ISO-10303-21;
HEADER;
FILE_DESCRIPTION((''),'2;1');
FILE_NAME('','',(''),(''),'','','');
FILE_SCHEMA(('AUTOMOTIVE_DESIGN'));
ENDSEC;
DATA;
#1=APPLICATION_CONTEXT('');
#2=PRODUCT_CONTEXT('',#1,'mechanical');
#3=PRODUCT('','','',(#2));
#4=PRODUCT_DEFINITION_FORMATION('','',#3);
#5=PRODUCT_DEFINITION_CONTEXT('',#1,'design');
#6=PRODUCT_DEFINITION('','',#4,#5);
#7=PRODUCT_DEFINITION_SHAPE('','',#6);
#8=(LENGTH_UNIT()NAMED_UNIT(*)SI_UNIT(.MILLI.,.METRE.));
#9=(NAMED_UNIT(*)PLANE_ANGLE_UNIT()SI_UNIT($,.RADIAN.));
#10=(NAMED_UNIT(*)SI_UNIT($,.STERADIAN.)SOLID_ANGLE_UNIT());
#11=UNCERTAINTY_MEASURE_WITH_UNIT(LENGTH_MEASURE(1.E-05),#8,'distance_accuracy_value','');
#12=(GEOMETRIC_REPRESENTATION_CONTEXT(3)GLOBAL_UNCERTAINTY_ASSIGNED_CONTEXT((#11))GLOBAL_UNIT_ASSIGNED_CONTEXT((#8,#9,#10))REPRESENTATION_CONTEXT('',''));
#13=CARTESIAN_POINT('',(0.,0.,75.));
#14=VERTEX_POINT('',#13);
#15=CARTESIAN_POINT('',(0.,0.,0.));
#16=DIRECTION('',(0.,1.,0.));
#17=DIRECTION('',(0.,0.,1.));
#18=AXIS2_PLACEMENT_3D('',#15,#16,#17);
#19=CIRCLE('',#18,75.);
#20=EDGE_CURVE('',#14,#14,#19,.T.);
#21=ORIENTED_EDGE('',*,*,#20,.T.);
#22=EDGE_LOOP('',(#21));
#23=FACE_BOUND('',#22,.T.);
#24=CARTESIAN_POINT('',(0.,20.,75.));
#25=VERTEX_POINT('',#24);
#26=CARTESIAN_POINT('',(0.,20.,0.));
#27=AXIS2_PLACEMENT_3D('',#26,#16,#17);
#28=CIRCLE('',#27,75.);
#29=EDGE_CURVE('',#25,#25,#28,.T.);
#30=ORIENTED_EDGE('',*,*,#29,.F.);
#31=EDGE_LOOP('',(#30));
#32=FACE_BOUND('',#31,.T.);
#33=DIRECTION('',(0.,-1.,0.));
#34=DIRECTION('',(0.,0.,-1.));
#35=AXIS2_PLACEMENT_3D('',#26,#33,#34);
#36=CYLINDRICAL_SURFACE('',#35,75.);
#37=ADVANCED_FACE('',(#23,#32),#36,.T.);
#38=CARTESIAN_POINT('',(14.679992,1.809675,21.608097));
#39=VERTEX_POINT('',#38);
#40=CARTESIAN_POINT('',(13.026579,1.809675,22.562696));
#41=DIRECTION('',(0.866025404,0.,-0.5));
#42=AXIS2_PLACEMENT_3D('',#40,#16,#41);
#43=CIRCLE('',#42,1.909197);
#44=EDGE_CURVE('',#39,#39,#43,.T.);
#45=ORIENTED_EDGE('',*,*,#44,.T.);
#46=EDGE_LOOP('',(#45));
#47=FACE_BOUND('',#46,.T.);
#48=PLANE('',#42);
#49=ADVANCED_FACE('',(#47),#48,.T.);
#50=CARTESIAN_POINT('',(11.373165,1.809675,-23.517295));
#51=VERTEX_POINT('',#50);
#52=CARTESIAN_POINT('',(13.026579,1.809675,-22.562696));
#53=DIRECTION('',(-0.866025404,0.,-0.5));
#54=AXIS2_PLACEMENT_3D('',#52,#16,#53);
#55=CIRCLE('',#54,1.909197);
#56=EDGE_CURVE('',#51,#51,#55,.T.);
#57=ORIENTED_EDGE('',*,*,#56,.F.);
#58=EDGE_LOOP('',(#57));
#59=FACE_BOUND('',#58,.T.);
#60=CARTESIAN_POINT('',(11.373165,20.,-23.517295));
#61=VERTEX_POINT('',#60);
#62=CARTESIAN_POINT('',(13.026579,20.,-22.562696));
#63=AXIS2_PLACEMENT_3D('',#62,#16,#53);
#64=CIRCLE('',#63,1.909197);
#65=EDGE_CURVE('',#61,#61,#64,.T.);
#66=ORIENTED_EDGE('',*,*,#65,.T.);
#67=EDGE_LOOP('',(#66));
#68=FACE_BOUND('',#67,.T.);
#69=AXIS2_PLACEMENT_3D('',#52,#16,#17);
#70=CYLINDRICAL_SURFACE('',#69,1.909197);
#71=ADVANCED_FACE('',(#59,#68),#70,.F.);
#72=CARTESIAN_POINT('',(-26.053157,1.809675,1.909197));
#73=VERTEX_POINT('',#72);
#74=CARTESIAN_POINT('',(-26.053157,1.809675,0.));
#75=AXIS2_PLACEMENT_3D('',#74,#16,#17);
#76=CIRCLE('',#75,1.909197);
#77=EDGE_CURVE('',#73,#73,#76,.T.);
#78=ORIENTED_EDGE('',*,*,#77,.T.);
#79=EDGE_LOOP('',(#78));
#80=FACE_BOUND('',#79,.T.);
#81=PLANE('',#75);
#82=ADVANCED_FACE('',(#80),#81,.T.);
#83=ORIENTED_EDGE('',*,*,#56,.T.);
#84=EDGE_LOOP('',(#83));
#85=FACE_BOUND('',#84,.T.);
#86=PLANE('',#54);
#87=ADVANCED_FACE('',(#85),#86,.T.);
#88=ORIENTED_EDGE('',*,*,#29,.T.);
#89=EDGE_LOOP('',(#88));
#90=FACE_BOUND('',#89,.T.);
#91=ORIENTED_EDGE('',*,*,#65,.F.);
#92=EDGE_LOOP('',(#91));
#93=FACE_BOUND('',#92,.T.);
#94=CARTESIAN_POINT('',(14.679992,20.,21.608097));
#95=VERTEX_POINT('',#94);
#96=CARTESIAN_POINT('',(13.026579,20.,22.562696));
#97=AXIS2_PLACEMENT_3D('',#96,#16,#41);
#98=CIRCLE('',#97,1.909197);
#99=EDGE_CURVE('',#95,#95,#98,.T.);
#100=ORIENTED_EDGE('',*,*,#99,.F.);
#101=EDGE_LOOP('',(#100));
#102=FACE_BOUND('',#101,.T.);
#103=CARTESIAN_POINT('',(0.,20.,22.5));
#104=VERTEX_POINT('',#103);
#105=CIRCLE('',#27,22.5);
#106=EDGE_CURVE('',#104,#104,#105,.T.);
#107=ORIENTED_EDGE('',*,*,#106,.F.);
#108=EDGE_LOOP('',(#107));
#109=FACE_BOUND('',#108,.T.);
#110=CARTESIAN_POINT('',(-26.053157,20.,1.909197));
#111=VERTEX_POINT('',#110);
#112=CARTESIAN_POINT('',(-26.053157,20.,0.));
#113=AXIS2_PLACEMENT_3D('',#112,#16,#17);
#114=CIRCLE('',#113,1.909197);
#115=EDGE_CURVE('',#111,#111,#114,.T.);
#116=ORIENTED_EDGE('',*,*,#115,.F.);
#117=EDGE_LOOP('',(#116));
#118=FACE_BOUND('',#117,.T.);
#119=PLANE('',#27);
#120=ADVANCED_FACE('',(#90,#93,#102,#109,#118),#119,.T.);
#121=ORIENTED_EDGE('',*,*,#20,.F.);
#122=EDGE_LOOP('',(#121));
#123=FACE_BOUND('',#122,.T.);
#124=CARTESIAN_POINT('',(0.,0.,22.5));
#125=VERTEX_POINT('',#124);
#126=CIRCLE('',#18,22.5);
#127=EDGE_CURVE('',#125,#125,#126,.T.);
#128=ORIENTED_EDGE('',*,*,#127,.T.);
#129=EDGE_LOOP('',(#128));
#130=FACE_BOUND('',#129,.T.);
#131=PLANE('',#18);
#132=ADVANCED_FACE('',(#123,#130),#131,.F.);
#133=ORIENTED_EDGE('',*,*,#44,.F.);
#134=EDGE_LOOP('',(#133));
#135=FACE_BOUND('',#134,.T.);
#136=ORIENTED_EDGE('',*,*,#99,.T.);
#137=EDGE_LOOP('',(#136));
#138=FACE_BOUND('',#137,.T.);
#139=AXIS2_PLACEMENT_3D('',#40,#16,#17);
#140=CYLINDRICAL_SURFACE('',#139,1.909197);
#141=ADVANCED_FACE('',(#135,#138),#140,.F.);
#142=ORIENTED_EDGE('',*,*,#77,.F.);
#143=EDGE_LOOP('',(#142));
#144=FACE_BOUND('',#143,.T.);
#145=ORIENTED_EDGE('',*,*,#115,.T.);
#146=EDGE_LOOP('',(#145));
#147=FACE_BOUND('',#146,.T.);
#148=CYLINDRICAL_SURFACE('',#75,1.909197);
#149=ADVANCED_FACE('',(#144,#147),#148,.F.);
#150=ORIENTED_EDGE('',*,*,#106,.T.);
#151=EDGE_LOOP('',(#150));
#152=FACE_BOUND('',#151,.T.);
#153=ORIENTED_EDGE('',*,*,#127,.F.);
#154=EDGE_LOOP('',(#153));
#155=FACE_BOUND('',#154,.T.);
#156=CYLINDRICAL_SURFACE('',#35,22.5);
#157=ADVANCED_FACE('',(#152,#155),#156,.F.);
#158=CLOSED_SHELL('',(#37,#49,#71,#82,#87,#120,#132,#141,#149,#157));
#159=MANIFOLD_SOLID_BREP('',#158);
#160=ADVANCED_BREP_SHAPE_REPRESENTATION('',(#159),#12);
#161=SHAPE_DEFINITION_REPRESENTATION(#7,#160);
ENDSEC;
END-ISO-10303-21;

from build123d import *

# Parameters (mm, degrees)
SKETCH1_R           = 75
BOSS_EXTRUDE1_DEPTH = 20
SKETCH2_R           = 22.5
CUT_EXTRUDE1_DEPTH  = 108.935165725
SKETCH3_R           = 1.909197161
CUT_EXTRUDE2_DEPTH  = 18.190324685
CIRPATTERN1_COUNT   = 3


with BuildPart() as part:
    # Sketch1 → Boss-Extrude1 (new body)
    with BuildSketch(Plane(origin=(0, 0, 0), x_dir=(1, 0, 0), z_dir=(0, 1, 0))):
        Circle(SKETCH1_R)
    extrude(amount=BOSS_EXTRUDE1_DEPTH)

    # Sketch2 → Cut-Extrude1 (cut, through all)
    with BuildSketch(Plane(origin=(0, 0, 0), x_dir=(1, 0, 0), z_dir=(0, 1, 0))):
        Circle(SKETCH2_R)
    extrude(amount=CUT_EXTRUDE1_DEPTH, mode=Mode.SUBTRACT)

    # Sketch3 → Cut-Extrude2 (cut)
    with BuildSketch(Plane(origin=(0, 20, 0), x_dir=(1, 0, 0), z_dir=(0, 1, 0))):
        with Locations((-26.053157287, 0)):
            Circle(SKETCH3_R)
    cut_extrude2 = extrude(amount=-CUT_EXTRUDE2_DEPTH, mode=Mode.SUBTRACT)

    # CirPattern1: Cut-Extrude2 ×3 about axis
    cirpattern1_axis = Axis((0, 0, 0), (0, 1, 0))
    for i in range(1, CIRPATTERN1_COUNT):
        add(cut_extrude2.rotate(cirpattern1_axis, i * 360 / CIRPATTERN1_COUNT), mode=Mode.SUBTRACT)


solid = part.part
